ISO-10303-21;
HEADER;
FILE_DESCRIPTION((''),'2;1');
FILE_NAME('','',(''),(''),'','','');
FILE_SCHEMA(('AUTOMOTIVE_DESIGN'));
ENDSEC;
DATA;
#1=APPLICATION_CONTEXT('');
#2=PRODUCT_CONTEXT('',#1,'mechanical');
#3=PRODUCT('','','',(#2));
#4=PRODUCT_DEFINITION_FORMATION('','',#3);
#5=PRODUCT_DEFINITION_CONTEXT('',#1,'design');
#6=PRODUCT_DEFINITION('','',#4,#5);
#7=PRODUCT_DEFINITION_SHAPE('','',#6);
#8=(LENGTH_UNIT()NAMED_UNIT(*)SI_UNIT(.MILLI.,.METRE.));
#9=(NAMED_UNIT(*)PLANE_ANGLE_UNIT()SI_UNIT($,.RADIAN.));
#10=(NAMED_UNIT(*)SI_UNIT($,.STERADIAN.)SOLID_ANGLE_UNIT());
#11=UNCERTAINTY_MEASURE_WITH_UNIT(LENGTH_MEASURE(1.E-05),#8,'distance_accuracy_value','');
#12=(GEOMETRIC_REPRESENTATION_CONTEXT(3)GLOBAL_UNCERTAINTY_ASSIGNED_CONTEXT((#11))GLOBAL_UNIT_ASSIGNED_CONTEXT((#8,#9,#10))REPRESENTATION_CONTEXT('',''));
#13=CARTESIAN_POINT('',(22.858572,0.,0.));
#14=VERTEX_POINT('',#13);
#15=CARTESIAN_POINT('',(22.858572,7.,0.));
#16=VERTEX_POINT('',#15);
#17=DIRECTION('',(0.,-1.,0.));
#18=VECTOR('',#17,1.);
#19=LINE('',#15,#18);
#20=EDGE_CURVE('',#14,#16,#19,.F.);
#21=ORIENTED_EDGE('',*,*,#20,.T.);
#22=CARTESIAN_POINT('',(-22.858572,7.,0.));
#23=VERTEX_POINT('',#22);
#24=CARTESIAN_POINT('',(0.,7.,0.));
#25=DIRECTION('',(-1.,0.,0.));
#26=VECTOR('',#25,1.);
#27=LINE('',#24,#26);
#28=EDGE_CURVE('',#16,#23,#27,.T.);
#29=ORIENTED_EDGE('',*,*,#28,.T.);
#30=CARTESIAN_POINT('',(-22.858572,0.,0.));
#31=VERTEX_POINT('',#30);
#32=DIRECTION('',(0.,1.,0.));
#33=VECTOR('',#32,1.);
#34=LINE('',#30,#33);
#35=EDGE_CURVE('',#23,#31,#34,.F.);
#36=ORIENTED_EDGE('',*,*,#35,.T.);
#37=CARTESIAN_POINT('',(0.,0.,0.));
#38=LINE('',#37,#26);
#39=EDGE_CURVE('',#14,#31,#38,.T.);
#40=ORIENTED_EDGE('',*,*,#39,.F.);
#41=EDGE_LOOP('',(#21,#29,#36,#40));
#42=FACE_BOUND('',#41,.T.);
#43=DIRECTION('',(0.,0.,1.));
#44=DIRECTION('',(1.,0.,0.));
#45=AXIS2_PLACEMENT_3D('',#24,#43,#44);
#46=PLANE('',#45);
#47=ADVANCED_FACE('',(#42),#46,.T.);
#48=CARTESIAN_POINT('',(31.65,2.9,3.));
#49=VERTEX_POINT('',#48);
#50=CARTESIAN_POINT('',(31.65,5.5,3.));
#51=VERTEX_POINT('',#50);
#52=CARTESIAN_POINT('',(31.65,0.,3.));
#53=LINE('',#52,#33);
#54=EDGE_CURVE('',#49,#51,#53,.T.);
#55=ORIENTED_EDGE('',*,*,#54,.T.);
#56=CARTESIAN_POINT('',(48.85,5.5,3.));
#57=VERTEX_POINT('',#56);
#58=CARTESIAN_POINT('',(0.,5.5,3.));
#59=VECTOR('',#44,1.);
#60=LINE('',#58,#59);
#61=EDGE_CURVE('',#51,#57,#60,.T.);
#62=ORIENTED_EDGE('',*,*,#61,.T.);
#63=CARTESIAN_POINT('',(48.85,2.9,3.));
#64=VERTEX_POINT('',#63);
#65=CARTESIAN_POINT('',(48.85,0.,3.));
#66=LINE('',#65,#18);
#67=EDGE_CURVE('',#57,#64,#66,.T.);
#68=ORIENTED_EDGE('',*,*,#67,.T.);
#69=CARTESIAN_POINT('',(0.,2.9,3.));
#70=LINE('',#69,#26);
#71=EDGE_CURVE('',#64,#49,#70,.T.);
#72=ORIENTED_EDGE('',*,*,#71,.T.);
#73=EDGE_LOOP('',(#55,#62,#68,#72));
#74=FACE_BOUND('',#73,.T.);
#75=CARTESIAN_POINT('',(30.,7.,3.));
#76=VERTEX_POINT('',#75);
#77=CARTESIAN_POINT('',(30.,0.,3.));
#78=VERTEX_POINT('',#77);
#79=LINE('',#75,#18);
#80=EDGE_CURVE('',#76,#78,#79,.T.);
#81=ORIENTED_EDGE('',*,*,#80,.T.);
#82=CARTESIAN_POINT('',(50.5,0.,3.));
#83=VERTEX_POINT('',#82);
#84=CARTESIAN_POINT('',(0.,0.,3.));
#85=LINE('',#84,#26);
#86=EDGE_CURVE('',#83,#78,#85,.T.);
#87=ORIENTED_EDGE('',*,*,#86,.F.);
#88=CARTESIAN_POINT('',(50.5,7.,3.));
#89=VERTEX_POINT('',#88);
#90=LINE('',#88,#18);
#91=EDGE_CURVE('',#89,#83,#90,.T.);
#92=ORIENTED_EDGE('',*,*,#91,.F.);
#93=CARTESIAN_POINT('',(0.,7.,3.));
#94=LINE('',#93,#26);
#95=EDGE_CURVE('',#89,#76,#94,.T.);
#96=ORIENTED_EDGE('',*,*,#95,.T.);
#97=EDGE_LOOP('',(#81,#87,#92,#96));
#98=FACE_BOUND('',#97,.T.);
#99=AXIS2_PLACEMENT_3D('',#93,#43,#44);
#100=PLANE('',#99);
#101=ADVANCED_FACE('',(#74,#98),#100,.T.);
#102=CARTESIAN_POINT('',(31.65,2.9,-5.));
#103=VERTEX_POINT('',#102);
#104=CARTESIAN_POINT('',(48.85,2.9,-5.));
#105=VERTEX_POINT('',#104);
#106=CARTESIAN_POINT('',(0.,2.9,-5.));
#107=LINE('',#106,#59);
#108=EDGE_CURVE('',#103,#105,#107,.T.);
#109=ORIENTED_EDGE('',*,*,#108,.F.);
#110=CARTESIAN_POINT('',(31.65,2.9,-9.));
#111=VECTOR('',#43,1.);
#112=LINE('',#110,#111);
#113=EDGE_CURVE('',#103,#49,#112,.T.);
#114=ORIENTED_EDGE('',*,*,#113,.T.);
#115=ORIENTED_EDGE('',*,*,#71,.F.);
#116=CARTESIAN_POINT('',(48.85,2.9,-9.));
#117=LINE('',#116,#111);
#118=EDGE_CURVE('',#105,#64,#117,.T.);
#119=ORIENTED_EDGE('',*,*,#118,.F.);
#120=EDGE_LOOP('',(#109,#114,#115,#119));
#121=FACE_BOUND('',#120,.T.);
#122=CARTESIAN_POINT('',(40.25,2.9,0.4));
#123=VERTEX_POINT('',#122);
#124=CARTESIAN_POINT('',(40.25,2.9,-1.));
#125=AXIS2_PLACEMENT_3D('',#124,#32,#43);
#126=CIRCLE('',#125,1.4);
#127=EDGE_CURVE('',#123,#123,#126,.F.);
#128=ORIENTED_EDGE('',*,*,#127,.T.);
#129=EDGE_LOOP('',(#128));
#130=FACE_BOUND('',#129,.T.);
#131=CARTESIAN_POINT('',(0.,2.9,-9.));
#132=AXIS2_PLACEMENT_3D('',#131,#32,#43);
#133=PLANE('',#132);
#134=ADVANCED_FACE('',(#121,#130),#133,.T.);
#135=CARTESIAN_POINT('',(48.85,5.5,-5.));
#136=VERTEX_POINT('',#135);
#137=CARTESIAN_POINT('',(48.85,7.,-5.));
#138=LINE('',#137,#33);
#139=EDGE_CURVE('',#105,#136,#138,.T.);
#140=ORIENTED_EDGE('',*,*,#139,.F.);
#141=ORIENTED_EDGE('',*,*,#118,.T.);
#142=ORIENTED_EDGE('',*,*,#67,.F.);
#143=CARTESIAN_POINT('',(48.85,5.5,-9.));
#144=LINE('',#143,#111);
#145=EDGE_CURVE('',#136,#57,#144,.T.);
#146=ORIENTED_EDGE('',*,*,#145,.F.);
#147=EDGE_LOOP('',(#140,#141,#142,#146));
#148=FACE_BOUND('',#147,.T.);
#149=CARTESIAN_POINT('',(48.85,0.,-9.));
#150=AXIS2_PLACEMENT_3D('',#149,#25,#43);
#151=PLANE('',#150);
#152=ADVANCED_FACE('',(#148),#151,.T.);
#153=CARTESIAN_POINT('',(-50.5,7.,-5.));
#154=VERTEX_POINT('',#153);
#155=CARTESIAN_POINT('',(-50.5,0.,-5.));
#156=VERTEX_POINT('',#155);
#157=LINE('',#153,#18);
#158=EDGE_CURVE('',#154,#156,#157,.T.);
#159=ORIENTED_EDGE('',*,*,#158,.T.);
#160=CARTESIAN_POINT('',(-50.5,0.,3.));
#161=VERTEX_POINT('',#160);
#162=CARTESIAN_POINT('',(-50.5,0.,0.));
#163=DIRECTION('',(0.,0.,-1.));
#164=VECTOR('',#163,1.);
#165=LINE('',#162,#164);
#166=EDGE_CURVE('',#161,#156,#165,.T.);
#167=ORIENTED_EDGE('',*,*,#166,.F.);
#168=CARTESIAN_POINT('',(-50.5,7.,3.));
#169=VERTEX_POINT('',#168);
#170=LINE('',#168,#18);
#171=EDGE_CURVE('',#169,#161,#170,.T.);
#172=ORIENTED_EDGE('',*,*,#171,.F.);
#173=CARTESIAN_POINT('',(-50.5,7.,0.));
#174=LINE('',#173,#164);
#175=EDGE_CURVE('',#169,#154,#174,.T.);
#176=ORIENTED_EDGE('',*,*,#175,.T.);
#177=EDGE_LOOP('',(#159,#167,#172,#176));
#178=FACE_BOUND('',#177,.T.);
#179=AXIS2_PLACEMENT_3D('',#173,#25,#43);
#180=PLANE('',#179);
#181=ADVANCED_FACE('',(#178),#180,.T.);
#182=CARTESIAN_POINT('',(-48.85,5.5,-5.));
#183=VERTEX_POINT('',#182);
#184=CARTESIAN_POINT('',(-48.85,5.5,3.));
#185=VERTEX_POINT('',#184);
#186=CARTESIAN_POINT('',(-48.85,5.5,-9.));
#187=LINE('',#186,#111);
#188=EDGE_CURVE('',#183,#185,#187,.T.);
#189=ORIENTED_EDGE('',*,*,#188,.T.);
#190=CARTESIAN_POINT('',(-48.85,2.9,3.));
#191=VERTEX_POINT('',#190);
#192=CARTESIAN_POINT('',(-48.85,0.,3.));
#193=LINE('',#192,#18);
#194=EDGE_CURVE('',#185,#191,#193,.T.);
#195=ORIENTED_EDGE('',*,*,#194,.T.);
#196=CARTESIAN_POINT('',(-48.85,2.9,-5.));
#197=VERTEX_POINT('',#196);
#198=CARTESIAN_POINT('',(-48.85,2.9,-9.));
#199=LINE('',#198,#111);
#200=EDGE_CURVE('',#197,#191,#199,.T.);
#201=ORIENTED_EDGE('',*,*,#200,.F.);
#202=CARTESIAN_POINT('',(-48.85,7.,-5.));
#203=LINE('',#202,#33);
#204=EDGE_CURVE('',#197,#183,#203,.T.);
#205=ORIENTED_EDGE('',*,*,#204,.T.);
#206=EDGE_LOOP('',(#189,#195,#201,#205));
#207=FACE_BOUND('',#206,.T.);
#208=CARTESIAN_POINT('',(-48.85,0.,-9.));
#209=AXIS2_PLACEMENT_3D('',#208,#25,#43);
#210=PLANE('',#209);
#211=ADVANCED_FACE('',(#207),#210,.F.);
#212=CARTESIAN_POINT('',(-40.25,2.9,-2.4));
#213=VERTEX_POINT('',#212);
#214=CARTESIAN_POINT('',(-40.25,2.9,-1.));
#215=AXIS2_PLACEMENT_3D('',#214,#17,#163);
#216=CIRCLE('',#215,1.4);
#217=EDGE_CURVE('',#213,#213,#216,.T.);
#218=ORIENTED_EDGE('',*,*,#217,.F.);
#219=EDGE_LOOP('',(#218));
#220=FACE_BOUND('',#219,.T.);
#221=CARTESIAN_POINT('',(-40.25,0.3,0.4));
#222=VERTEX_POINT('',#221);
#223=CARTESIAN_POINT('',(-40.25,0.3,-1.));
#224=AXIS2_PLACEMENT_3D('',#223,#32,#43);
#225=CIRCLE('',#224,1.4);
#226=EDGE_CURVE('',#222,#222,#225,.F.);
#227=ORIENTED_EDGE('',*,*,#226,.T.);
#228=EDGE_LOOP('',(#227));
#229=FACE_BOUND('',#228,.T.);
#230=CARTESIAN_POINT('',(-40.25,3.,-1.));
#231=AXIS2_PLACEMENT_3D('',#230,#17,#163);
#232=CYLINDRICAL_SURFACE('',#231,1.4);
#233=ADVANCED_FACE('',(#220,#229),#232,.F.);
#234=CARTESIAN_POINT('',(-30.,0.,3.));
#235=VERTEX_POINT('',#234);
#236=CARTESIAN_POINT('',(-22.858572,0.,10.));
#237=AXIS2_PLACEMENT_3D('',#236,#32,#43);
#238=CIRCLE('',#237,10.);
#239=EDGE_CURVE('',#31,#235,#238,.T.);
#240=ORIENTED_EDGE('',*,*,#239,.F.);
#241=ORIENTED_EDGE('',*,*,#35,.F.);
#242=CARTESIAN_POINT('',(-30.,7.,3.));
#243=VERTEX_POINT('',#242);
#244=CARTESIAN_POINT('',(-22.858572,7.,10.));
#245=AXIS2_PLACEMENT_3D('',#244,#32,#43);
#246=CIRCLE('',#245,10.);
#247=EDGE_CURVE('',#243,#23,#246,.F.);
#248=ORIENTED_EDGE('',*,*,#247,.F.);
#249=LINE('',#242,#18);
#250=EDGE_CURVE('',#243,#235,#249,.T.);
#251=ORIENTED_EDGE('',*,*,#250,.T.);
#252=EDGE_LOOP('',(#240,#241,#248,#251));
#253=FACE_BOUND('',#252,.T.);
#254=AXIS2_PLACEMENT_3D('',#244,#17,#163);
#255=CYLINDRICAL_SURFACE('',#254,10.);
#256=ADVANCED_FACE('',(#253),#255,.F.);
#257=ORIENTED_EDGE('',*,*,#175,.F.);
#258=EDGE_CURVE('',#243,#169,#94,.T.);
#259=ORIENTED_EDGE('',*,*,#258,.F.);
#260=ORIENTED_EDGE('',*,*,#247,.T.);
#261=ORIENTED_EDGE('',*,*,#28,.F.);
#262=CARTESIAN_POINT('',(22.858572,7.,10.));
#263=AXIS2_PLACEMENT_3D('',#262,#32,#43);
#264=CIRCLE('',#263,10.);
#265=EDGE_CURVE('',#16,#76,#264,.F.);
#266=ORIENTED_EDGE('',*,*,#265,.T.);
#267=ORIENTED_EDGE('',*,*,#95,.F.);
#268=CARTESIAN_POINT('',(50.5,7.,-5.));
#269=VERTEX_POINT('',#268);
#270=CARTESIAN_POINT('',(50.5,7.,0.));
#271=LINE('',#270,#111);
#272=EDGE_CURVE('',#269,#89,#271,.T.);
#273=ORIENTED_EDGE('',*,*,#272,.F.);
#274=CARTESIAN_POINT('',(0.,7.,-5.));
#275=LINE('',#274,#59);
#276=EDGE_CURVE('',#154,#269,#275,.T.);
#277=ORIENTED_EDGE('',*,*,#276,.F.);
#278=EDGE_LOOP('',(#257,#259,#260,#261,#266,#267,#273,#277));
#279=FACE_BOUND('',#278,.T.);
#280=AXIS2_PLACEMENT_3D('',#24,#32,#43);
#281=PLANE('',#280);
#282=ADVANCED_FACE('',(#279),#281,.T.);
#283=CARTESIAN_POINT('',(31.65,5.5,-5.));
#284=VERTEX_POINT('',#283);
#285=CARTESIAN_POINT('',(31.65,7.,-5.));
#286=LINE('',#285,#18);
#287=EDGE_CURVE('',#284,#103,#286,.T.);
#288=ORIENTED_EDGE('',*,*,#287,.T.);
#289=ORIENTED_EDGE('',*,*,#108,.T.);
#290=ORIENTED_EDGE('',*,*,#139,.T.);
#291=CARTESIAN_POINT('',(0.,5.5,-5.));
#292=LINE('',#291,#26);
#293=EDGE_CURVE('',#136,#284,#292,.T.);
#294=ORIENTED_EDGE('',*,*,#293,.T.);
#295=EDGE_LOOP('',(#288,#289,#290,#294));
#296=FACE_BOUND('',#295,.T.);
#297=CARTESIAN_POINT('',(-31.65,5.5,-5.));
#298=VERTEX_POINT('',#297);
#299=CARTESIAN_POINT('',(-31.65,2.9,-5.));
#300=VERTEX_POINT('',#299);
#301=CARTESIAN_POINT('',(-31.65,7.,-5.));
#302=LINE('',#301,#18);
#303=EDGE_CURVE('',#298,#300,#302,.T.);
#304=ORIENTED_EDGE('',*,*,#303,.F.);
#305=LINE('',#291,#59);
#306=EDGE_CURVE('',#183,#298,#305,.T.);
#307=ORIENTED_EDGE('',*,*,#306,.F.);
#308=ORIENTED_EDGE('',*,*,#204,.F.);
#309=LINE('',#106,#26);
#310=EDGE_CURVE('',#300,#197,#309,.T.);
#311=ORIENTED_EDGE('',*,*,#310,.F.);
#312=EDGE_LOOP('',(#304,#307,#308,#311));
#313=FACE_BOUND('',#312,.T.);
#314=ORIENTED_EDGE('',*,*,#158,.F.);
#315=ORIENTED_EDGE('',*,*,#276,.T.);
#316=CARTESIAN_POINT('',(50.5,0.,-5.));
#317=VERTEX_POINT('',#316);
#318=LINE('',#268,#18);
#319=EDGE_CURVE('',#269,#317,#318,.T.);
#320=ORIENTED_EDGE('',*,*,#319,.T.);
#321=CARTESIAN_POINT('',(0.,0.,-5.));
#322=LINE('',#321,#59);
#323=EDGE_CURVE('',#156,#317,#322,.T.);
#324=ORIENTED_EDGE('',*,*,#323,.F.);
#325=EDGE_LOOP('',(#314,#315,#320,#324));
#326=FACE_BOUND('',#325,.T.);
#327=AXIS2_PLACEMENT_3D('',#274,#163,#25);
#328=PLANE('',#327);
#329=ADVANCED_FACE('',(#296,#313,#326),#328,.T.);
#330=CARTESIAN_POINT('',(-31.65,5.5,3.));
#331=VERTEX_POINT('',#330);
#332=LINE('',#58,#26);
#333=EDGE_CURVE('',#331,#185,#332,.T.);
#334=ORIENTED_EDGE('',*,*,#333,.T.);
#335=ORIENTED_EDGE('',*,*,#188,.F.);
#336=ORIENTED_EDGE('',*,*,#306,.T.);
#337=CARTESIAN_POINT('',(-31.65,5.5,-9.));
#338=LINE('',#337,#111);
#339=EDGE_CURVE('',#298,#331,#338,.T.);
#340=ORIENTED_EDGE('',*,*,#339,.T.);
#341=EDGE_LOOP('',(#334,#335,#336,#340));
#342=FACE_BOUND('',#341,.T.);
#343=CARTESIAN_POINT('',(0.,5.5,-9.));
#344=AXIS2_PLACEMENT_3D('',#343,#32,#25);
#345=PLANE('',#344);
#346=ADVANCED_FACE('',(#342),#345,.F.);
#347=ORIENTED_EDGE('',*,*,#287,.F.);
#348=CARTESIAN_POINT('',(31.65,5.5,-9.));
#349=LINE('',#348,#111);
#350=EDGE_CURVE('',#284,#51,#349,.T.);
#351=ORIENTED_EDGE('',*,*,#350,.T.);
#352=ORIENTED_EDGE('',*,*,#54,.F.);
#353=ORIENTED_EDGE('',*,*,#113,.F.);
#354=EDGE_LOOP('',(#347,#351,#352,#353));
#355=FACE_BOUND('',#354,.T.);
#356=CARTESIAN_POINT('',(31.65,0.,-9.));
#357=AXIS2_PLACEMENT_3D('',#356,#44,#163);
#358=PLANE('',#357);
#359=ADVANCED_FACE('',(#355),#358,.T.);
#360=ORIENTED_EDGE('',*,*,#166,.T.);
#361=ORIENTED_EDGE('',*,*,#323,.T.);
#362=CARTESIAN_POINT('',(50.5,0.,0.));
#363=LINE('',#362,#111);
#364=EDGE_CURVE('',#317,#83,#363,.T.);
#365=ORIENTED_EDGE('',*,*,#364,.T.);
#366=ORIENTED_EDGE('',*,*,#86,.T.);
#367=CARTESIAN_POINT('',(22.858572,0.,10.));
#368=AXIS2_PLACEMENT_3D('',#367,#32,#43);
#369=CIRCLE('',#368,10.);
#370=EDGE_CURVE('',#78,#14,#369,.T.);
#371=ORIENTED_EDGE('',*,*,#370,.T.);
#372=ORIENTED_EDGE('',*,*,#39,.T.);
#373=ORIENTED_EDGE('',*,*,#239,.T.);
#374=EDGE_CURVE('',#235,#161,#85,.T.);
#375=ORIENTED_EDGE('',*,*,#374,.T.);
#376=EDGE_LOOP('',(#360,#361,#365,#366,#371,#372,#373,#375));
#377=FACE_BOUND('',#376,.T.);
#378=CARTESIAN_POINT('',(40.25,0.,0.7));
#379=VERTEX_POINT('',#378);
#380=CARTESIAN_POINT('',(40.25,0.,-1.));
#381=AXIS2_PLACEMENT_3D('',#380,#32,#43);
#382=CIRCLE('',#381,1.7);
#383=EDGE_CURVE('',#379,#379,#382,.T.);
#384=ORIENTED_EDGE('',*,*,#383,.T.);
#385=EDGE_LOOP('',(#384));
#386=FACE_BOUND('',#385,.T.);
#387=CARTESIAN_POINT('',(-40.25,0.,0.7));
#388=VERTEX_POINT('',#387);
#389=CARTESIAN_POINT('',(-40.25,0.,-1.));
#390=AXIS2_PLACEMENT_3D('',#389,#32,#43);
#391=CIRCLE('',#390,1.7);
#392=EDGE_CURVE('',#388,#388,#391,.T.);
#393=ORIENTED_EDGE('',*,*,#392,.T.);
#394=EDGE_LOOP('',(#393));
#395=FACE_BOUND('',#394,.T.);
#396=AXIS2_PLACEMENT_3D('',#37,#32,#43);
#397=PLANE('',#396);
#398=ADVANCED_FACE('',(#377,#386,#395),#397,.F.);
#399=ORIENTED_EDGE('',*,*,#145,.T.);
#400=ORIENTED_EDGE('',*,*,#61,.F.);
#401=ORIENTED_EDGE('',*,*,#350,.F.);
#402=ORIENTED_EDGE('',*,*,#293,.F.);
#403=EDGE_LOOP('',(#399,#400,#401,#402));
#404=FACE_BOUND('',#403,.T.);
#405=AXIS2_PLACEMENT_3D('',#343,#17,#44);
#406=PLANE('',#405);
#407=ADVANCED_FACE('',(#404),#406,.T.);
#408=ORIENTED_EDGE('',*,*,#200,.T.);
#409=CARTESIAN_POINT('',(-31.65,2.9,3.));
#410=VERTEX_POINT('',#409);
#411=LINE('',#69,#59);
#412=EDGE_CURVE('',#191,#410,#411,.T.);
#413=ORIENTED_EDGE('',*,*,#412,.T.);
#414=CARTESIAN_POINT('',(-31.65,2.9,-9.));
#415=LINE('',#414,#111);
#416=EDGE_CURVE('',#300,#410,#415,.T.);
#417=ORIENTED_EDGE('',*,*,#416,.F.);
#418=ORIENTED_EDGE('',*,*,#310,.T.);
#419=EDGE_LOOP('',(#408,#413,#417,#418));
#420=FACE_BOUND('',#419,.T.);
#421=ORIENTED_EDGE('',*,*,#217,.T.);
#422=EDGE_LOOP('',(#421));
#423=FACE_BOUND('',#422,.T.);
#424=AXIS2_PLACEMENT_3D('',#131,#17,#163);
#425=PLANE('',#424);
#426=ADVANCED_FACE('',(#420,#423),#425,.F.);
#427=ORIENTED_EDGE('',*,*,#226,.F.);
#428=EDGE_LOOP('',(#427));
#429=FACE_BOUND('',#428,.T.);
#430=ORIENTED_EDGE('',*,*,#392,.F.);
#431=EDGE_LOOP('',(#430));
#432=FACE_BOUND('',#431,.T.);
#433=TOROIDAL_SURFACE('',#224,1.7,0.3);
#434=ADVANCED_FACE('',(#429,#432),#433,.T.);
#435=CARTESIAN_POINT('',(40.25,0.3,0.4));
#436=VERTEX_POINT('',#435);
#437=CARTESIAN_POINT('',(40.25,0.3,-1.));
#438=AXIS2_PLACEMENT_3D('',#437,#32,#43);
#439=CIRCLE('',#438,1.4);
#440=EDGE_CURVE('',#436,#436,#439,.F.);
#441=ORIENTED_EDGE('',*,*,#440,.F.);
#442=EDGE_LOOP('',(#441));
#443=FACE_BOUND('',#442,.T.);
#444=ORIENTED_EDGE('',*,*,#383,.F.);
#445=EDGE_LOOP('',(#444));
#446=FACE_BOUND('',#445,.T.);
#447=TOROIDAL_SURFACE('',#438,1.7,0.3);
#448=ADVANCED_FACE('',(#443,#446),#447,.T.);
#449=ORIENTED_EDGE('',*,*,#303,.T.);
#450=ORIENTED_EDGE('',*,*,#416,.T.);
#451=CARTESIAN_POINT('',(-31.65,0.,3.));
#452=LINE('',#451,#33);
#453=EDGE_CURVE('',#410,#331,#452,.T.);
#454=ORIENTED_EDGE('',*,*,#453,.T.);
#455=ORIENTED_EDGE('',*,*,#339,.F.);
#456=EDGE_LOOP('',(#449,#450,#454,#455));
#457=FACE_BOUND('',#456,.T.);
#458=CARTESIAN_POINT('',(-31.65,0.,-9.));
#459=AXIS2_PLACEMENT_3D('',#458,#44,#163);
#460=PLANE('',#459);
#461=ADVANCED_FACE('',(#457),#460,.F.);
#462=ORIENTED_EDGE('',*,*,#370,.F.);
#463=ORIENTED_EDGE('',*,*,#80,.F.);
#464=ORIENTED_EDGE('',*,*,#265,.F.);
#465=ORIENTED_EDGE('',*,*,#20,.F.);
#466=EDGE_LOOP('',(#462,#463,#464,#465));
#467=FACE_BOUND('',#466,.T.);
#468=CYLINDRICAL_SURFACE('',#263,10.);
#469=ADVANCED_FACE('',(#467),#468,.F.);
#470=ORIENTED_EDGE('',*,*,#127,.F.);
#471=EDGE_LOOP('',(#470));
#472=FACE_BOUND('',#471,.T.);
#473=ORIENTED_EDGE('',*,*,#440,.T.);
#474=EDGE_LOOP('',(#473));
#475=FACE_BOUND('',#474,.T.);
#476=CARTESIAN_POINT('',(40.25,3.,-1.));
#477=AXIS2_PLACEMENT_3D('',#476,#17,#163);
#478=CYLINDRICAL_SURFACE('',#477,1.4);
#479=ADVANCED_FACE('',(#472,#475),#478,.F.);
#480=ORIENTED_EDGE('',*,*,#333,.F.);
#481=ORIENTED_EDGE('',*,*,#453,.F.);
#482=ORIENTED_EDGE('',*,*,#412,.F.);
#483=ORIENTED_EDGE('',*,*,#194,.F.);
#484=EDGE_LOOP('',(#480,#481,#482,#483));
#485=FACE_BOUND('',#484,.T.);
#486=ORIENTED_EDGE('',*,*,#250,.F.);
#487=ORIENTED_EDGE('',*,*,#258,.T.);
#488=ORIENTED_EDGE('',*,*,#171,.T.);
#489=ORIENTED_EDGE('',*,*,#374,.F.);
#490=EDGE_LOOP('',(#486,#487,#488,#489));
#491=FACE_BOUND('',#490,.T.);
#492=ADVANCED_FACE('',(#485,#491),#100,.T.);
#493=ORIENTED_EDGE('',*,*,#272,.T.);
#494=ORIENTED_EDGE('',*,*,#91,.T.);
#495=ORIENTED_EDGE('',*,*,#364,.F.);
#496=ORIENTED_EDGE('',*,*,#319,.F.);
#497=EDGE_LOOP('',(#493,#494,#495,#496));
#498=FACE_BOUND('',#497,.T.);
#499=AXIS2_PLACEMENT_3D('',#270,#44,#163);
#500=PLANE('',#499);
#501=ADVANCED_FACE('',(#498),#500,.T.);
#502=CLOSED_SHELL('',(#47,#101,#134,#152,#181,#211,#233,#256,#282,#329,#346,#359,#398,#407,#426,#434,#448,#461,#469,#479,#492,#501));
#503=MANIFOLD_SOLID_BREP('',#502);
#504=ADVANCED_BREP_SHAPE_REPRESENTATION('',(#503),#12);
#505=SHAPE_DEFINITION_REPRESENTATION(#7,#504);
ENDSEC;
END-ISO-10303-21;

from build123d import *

# Parameters (mm, degrees)
SKETCH2_W           = 60
SKETCH2_H           = 5
BOSS_EXTRUDE1_DEPTH = 7
CUT_EXTRUDE1_DEPTH  = 12
SKETCH5_R           = 1.4
CUT_EXTRUDE2_DEPTH  = 3
FILLET1_R           = 10
FILLET2_R           = 0.3


with BuildPart() as part:
    # Sketch2 → Boss-Extrude1 (new body)
    with BuildSketch(Plane(origin=(0, 0, 0), x_dir=(1, 0, 0), z_dir=(0, 1, 0))):
        Polygon((-50.5, 5), (-30, 5), (-30, 0), (-30, -3), (-50.5, -3), align=None)
        with Locations((0, 2.5)):
            Rectangle(SKETCH2_W, SKETCH2_H)
        Polygon((30, -3), (30, 0), (30, 5), (50.5, 5), (50.5, -3), align=None)
    extrude(amount=BOSS_EXTRUDE1_DEPTH)

    # Sketch4 → Cut-Extrude1 (cut)
    with BuildSketch(Plane.XY.offset(3)):
        Polygon((-31.65, 2.9), (-31.65, 5.5), (-40.25, 5.5), (-48.85, 5.5), (-48.85, 2.9), align=None)
        Polygon((48.85, 2.9), (31.65, 2.9), (31.65, 5.5), (40.25, 5.5), (48.85, 5.5), align=None)
    extrude(amount=-CUT_EXTRUDE1_DEPTH, mode=Mode.SUBTRACT)

    # Sketch5 → Cut-Extrude2 (cut)
    with BuildSketch(Plane.XZ):
        with Locations(Location((40.25, -1, 0), (0, 0, 270))):
            Circle(SKETCH5_R)
        with Locations(Location((-40.25, -1, 0), (0, 0, 270))):
            Circle(SKETCH5_R)
    extrude(amount=-CUT_EXTRUDE2_DEPTH, mode=Mode.SUBTRACT)

    # Fillet1
    # the kernel refuses this fillet: 10 mm, written as the material it adds along each edge
    with BuildSketch(Plane(origin=(-30, 0, 0), x_dir=(0, 0, 1), z_dir=(0, 1, 0))) as fillet1_piece_1:
        with BuildLine():
            CenterArc((10, 7.141428429), FILLET1_R, 180, 45.572995999)
            Line((0, 7.141428429), (-0.2, 7.141428429))
            Line((-0.2, 7.141428429), (-0.2, 0))
            Line((-0.2, 0), (0, -0.2))
            ThreePointArc((0, -0.2), (1.5, -0.2), (2.86, -0.142828569))
            Line((2.86, -0.142828569), (3, 0))
        make_face()
    extrude(amount=7)
    with BuildSketch(Plane(origin=(30, 0, 0), x_dir=(0, 0, 1), z_dir=(0, 1, 0))) as fillet1_piece_2:
        with BuildLine():
            CenterArc((10, -7.141428429), FILLET1_R, 134.427004001, 45.572995999)
            Line((0, -7.141428429), (-0.2, -7.141428429))
            Line((-0.2, -7.141428429), (-0.2, 0))
            Line((-0.2, 0), (0, 0.2))
            ThreePointArc((0, 0.2), (1.5, 0.2), (2.86, 0.142828569))
            Line((2.86, 0.142828569), (3, 0))
        make_face()
    extrude(amount=7)

    # Fillet2
    fillet2_edges = [part.edges().sort_by_distance(p)[0] for p in [
        (40.25, 0, 0.4),
        (-40.25, 0, 0.4),
    ]]
    fillet(fillet2_edges, radius=FILLET2_R)


solid = part.part
